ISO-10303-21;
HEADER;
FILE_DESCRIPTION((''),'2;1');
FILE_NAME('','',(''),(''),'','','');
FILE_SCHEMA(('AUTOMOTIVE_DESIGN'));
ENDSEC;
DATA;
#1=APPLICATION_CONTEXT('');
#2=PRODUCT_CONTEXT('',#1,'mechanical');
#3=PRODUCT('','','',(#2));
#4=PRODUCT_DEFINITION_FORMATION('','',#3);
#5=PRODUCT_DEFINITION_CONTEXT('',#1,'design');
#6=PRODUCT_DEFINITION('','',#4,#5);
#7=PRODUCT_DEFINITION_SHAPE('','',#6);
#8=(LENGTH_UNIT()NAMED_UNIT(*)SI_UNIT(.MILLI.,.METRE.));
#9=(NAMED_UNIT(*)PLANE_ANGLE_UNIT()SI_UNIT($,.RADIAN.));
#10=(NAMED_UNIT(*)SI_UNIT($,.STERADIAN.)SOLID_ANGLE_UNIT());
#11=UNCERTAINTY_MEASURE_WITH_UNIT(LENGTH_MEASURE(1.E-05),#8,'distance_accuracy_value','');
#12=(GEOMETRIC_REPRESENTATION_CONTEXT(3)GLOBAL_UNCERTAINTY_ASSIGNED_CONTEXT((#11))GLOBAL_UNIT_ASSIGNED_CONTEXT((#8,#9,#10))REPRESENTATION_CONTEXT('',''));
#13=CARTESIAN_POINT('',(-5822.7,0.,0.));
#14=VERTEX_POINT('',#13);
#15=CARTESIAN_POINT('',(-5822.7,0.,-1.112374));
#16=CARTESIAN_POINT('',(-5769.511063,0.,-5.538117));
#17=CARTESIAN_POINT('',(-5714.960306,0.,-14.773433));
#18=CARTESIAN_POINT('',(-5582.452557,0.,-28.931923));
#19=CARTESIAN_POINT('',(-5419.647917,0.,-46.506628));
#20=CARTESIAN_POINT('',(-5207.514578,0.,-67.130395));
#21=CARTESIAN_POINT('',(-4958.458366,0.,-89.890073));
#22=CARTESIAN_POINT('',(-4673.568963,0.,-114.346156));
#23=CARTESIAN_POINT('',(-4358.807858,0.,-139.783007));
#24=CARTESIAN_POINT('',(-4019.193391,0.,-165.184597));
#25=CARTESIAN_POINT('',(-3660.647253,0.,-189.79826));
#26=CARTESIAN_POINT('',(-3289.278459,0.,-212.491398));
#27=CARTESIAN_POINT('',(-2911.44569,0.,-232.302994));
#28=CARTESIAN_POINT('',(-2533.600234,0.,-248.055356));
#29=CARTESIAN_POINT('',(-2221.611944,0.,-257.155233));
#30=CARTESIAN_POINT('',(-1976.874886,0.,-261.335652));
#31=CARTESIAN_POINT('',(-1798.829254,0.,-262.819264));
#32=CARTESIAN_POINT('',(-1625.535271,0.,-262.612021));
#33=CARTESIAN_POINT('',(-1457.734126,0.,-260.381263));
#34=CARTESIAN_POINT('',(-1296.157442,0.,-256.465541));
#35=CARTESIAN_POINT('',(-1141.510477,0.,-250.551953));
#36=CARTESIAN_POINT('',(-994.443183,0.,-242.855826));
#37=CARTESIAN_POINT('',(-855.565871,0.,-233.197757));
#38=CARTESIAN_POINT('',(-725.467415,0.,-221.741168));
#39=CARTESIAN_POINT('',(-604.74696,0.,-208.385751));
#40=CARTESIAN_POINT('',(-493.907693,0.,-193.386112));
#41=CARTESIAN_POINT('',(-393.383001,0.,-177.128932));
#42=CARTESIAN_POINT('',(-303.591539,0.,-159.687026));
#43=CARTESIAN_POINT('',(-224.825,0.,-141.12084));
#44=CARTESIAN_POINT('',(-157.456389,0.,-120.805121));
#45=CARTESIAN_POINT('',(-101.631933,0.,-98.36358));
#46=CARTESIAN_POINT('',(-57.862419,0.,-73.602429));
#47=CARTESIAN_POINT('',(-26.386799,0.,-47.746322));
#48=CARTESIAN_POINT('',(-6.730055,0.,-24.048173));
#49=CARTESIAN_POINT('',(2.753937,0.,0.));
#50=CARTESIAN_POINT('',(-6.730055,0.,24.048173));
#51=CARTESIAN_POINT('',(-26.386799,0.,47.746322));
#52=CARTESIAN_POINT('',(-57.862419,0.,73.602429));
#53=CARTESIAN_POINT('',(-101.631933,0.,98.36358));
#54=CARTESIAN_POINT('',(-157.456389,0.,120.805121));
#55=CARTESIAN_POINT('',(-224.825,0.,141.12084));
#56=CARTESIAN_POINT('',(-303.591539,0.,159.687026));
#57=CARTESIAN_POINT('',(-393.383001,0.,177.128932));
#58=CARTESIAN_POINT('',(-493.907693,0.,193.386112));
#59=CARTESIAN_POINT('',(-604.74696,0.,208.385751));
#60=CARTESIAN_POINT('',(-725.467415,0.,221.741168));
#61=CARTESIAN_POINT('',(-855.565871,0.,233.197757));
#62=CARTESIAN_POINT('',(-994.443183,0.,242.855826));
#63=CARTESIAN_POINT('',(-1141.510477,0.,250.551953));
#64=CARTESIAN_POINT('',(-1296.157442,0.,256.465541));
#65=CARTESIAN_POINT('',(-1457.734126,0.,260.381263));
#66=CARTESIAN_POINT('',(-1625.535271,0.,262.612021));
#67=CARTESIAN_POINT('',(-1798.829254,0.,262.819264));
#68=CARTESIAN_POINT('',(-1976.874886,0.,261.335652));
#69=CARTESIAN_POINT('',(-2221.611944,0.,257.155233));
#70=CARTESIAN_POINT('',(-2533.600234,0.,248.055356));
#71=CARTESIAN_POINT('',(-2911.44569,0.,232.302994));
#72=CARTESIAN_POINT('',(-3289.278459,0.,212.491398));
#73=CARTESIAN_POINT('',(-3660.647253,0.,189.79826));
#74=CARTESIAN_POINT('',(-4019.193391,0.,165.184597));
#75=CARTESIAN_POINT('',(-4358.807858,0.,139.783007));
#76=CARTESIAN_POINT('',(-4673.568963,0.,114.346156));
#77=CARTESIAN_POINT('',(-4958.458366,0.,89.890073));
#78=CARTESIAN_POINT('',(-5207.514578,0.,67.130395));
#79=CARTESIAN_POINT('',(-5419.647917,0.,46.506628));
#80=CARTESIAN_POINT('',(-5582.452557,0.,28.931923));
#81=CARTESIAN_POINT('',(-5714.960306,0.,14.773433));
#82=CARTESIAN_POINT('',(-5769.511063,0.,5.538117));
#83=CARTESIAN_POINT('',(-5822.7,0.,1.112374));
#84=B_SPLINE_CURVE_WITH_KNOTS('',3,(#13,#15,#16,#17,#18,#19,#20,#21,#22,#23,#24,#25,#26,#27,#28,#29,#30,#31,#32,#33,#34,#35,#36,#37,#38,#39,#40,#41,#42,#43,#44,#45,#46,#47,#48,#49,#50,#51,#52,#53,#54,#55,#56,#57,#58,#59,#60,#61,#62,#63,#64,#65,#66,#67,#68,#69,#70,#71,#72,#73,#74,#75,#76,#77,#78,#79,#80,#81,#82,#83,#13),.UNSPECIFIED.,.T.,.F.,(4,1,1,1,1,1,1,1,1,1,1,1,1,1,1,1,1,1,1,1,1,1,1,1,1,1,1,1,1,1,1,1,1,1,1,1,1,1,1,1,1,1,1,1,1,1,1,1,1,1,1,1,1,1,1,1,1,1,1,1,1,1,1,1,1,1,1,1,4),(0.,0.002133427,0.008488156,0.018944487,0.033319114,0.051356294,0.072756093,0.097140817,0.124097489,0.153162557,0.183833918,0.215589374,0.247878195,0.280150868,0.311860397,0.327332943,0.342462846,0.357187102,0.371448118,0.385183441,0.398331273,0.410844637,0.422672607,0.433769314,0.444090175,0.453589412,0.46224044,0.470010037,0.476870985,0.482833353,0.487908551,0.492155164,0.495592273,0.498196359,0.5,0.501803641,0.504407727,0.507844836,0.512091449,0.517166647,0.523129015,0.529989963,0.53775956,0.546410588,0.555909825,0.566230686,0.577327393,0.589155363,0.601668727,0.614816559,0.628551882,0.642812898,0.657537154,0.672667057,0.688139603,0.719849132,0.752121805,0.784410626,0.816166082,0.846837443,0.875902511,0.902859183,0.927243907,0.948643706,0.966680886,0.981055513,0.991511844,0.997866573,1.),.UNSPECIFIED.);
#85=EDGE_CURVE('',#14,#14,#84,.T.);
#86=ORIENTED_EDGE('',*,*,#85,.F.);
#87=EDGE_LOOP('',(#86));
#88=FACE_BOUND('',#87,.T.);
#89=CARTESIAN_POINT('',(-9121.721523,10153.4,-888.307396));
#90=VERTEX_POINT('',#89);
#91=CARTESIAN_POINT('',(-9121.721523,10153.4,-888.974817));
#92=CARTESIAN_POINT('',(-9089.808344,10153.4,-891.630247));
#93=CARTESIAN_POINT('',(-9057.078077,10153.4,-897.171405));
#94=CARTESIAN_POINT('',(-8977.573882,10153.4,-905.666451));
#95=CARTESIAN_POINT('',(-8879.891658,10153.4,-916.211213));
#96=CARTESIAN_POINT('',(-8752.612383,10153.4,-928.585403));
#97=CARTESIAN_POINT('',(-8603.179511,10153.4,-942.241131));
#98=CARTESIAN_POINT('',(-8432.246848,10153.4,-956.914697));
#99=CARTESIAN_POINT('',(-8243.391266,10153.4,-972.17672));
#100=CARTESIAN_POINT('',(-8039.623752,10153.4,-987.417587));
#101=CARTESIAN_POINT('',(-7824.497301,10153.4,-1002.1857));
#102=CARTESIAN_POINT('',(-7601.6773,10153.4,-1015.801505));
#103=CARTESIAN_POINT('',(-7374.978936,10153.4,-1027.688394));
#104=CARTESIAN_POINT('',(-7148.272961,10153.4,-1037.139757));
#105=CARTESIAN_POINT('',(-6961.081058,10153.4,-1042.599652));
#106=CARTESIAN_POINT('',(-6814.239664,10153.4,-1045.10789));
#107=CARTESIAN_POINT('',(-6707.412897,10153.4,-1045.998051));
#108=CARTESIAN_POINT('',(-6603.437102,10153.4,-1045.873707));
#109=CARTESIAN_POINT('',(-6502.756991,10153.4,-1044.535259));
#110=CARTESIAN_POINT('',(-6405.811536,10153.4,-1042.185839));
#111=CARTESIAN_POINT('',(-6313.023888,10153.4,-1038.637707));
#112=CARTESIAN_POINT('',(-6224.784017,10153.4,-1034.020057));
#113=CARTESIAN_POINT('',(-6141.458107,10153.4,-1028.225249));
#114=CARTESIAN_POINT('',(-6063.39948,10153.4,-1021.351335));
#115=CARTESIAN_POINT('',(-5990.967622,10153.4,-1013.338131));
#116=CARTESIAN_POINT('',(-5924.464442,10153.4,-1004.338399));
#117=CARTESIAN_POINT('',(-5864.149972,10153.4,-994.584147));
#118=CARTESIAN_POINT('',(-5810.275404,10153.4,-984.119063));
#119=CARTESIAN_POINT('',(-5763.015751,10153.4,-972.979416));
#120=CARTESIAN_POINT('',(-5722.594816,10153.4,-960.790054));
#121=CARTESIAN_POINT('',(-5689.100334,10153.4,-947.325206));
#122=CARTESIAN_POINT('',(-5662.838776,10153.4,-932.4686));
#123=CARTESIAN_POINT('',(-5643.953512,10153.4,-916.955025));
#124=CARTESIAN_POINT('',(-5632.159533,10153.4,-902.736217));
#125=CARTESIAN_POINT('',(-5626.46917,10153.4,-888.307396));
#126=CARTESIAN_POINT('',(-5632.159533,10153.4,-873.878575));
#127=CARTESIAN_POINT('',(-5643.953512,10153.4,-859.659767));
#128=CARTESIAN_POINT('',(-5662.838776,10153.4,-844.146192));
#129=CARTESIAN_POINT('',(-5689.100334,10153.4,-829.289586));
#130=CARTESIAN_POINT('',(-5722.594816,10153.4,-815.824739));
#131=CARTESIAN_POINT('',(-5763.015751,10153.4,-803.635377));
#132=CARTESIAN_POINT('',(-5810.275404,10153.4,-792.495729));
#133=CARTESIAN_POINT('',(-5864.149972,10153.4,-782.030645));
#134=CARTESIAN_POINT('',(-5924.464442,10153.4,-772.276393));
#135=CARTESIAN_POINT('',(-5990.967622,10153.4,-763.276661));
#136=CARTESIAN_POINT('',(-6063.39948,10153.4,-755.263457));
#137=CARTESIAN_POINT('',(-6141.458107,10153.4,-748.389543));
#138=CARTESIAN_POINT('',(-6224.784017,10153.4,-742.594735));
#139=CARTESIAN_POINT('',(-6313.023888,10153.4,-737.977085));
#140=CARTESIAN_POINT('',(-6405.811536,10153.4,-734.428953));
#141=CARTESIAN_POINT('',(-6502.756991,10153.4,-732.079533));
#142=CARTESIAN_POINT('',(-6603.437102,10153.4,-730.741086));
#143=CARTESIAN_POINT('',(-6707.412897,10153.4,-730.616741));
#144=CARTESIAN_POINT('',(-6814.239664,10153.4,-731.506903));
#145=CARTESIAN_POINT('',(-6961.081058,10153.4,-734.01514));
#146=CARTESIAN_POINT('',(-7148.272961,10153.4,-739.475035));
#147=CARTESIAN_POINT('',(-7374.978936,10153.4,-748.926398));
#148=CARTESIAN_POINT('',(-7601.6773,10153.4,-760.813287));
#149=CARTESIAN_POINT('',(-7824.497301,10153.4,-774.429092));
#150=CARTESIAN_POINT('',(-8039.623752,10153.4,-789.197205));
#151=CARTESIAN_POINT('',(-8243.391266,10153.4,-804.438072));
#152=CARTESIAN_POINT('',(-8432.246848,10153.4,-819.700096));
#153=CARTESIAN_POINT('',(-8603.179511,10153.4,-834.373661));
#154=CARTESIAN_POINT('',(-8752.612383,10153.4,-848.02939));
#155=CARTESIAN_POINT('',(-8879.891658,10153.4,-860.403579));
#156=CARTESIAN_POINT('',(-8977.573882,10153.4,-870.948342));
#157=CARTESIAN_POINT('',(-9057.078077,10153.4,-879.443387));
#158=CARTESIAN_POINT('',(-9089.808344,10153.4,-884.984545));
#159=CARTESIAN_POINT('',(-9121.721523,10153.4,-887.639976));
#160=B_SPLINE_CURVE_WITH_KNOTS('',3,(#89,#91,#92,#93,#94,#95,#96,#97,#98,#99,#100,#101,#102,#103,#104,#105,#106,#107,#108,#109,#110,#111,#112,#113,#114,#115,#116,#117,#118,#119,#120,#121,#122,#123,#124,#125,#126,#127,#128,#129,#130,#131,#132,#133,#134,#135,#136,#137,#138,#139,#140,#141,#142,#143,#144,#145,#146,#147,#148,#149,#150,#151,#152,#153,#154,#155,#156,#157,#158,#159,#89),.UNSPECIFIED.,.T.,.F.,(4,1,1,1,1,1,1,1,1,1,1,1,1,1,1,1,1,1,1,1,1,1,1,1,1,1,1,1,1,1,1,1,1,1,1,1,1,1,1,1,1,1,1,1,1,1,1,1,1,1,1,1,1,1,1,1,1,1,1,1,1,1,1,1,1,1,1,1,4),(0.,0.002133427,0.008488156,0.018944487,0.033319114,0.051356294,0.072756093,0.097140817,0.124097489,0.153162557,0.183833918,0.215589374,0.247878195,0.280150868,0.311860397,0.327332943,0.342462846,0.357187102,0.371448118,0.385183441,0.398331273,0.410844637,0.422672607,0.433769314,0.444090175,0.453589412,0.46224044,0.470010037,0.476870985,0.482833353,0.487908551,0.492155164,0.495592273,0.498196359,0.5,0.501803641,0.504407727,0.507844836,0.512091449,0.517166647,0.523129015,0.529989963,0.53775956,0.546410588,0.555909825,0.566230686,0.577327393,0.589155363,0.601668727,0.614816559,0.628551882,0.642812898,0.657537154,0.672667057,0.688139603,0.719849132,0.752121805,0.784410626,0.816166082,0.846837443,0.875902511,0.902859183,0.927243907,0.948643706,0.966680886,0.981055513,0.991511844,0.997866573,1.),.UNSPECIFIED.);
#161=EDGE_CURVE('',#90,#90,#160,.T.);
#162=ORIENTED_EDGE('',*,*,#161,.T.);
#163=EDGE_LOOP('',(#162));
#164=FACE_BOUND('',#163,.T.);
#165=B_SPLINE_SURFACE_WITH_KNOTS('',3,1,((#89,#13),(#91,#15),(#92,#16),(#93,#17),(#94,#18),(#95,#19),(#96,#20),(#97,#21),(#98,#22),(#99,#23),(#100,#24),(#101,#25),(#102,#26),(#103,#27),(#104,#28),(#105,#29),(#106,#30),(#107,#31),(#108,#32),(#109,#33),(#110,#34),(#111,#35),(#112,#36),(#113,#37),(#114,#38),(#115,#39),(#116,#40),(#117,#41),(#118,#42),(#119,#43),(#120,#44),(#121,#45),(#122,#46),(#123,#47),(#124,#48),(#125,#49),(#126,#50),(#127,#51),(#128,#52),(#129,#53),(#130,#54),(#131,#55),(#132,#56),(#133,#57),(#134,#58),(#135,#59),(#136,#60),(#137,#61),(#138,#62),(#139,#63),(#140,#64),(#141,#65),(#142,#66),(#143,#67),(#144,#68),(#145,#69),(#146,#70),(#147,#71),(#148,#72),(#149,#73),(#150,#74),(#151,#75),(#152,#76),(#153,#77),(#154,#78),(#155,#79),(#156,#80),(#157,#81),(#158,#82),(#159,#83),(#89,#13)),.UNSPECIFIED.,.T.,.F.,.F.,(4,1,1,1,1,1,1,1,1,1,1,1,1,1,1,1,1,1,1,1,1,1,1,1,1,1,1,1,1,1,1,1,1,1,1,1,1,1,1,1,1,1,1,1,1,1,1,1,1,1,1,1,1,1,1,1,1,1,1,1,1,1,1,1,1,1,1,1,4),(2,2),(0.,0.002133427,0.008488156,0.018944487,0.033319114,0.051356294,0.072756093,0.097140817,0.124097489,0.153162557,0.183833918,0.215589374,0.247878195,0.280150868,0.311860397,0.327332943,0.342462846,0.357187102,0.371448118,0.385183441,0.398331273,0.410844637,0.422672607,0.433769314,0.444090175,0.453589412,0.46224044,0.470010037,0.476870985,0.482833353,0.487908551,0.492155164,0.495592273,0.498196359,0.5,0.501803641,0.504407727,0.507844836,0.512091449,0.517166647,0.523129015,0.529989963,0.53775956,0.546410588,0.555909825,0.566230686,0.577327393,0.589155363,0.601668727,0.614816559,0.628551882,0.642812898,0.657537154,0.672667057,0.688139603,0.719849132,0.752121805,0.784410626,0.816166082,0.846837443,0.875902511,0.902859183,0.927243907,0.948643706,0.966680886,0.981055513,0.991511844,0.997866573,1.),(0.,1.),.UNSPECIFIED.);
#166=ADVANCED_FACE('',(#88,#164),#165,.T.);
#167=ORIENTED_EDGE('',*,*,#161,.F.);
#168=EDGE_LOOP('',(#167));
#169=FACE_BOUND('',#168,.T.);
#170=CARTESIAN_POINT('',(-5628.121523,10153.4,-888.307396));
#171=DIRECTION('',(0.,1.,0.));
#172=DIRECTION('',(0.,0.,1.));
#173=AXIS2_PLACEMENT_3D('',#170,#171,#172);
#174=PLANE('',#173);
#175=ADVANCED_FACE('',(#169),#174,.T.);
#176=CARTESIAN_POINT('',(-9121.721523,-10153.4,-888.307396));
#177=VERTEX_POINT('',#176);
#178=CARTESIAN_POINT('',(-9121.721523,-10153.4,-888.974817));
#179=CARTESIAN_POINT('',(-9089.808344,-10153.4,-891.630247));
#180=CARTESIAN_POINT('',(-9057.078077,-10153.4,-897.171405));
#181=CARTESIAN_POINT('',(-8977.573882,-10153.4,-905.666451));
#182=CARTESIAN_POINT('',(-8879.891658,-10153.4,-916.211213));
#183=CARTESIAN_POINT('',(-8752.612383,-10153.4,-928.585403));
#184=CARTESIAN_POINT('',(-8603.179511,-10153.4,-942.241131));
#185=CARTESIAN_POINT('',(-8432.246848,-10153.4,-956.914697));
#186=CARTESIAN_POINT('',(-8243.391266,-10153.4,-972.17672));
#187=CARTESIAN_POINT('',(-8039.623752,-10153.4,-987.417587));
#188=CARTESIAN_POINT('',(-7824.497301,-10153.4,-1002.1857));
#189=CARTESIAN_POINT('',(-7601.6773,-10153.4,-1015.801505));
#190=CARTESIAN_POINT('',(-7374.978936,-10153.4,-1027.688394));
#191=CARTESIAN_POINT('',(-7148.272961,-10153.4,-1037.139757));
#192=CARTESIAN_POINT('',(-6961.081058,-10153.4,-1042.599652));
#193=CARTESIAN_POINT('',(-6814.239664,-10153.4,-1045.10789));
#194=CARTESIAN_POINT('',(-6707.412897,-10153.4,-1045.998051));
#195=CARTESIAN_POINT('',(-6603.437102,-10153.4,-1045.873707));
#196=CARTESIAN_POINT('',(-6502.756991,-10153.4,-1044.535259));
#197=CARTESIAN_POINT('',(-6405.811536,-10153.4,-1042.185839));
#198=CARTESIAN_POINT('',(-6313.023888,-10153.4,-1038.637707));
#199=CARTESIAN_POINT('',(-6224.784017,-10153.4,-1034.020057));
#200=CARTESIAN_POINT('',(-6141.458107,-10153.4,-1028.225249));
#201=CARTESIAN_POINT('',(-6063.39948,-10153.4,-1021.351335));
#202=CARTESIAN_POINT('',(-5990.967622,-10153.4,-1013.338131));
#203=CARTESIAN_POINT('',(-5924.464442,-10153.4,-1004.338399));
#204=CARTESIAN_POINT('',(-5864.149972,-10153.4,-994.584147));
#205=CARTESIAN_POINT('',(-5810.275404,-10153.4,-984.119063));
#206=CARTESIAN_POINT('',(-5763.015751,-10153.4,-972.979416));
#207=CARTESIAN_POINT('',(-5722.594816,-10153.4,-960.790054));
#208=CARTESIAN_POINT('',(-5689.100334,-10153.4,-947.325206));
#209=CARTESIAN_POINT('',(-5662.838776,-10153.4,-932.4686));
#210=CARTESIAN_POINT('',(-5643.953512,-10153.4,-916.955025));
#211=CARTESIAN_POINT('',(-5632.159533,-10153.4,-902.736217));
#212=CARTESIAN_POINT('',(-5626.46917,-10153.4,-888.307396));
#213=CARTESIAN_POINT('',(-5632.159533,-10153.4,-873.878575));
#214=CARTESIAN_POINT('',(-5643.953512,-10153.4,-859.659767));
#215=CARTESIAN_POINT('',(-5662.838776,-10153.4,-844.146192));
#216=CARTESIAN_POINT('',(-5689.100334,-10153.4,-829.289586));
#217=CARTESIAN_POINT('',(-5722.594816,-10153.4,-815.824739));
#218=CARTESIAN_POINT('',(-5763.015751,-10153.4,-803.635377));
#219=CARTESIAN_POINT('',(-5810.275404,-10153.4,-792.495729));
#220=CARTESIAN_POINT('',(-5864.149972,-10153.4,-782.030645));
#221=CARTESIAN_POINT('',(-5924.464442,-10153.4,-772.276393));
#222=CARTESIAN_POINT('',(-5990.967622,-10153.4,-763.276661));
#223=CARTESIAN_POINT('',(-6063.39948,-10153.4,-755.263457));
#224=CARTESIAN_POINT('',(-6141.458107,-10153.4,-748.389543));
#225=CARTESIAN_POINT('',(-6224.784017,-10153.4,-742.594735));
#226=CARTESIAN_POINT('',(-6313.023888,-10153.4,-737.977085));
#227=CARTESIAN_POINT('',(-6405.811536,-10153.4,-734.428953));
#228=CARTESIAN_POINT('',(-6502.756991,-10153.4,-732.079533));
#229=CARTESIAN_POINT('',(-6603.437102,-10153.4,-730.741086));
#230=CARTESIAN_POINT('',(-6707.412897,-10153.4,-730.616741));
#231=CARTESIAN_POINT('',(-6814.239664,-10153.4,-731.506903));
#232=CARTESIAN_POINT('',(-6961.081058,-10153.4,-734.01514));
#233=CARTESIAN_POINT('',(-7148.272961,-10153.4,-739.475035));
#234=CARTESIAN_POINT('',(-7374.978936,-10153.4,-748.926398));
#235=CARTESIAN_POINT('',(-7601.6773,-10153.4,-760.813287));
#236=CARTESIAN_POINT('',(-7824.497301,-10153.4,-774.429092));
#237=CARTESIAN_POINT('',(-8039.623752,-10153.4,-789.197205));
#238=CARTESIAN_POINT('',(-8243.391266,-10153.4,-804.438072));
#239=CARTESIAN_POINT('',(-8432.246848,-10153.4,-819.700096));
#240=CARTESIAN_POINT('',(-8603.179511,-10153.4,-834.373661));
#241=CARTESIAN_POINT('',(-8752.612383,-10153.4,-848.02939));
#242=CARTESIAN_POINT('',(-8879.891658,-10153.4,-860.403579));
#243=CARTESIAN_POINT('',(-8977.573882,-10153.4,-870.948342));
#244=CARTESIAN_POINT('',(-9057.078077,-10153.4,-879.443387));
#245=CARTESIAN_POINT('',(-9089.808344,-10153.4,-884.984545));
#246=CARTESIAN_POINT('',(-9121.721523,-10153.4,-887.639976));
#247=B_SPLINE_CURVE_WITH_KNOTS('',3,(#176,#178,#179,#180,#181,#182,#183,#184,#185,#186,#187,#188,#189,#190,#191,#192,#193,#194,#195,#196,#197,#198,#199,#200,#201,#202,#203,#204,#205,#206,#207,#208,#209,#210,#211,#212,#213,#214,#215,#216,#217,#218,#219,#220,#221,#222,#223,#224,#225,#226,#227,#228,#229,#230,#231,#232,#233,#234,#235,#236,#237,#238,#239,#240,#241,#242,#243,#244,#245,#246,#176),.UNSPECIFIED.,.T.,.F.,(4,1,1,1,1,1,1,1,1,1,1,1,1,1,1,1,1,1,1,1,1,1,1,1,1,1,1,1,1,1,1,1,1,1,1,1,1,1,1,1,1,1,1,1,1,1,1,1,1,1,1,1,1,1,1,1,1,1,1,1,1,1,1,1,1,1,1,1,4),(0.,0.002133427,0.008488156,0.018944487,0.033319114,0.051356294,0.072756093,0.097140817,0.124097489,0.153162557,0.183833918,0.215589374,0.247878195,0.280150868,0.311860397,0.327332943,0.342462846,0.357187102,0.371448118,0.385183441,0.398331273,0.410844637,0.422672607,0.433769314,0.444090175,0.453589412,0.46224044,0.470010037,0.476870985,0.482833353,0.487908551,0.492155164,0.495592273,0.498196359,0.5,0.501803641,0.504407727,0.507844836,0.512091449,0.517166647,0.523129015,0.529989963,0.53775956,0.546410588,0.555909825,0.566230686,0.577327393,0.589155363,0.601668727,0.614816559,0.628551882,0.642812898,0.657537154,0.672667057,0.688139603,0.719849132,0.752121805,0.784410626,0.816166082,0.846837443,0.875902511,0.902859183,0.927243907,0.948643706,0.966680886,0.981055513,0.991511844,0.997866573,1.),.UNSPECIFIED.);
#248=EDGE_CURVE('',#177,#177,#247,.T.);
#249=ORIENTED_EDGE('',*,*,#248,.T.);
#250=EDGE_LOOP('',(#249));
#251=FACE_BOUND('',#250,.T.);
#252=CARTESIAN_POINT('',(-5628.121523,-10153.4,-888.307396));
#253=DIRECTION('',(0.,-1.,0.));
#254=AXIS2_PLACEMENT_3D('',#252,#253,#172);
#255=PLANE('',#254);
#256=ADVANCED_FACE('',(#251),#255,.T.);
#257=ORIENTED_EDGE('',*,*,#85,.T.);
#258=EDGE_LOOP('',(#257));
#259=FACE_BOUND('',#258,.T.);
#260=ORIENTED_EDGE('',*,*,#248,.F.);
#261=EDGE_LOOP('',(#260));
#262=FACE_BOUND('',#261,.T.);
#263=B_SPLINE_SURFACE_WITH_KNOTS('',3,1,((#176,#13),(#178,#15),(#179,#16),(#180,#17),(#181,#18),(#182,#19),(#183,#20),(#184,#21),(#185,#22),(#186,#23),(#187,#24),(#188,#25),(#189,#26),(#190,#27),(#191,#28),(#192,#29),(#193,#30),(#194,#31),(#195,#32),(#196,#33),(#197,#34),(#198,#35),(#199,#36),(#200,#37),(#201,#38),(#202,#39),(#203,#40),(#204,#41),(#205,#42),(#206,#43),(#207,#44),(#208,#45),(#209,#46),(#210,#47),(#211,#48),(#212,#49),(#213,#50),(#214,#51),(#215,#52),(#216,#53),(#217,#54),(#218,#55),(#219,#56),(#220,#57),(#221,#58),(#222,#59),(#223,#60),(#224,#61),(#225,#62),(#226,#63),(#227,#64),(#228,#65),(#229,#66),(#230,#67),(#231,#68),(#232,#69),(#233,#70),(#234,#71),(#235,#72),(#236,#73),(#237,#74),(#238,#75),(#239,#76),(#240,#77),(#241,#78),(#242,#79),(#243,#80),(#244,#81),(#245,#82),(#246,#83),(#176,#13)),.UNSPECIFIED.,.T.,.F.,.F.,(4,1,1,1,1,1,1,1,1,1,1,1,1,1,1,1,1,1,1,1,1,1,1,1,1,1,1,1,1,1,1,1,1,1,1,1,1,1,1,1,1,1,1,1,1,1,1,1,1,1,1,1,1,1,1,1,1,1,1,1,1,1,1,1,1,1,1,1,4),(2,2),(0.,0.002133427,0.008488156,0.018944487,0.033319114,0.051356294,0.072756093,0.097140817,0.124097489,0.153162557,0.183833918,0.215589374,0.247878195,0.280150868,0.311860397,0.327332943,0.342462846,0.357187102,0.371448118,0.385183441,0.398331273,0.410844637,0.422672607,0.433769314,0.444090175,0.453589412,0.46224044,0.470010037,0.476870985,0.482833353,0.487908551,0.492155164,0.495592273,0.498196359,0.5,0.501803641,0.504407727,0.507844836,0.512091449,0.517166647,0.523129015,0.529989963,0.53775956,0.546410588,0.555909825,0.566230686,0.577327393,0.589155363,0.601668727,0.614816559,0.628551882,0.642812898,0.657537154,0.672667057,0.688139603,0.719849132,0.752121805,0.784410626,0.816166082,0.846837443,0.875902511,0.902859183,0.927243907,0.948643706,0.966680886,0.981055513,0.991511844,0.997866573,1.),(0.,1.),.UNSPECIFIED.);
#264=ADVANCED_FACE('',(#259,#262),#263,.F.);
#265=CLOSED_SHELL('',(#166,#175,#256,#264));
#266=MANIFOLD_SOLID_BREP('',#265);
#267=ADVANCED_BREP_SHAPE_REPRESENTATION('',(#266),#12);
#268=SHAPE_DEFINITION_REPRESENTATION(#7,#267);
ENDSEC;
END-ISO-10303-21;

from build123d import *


with BuildPart() as part:
    # Loft1: read off the stored shape, not the designer's step
    # Loft1: loft between two sections, ruled curve by curve
    loft1_from = [
        Edge.make_bspline([(-9121.721523, 10153.4, -888.3073962), (-9121.721523, 10153.4, -888.97481667), (-9089.808343706, 10153.4, -891.630247371), (-9057.07807669, 10153.4, -897.171405393), (-8977.573882293, 10153.4, -905.666450739), (-8879.891657699, 10153.4, -916.211213285), (-8752.61238274, 10153.4, -928.585402678), (-8603.179510828, 10153.4, -942.241130984), (-8432.246847932, 10153.4, -956.914696759), (-8243.391266019, 10153.4, -972.176720475), (-8039.623752093, 10153.4, -987.41758735), (-7824.497301325, 10153.4, -1002.185700126), (-7601.67730037, 10153.4, -1015.801504829), (-7374.97893646, 10153.4, -1027.688394313), (-7148.272960999, 10153.4, -1037.139757469), (-6961.081058327, 10153.4, -1042.599652216), (-6814.239664316, 10153.4, -1045.107889524), (-6707.412896579, 10153.4, -1045.99805137), (-6603.437102019, 10153.4, -1045.873706629), (-6502.756991249, 10153.4, -1044.535259245), (-6405.811536, 10153.4, -1042.185839499), (-6313.023888406, 10153.4, -1038.637706974), (-6224.784017274, 10153.4, -1034.020057375), (-6141.458107161, 10153.4, -1028.225249142), (-6063.399479883, 10153.4, -1021.351335422), (-5990.967621691, 10153.4, -1013.338130748), (-5924.464442276, 10153.4, -1004.338399103), (-5864.149972089, 10153.4, -994.584147276), (-5810.27540371, 10153.4, -984.119063415), (-5763.015750745, 10153.4, -972.979415582), (-5722.594815838, 10153.4, -960.790053577), (-5689.10033376, 10153.4, -947.325206498), (-5662.838775739, 10153.4, -932.4686005), (-5643.953511739, 10153.4, -916.955025127), (-5632.159532765, 10153.4, -902.7362173), (-5626.469170056, 10153.4, -888.3073962), (-5632.159532765, 10153.4, -873.8785751), (-5643.953511739, 10153.4, -859.659767273), (-5662.838775739, 10153.4, -844.1461919), (-5689.10033376, 10153.4, -829.289585902), (-5722.594815838, 10153.4, -815.824738823), (-5763.015750745, 10153.4, -803.635376821), (-5810.275403708, 10153.4, -792.49572897), (-5864.149972109, 10153.4, -782.030645185), (-5924.464442253, 10153.4, -772.276393018), (-5990.967621694, 10153.4, -763.276661476), (-6063.399479882, 10153.4, -755.263456771), (-6141.458107161, 10153.4, -748.38954306), (-6224.784017274, 10153.4, -742.594734825), (-6313.023888406, 10153.4, -737.977085226), (-6405.811536, 10153.4, -734.428952701), (-6502.756991249, 10153.4, -732.079532955), (-6603.437102019, 10153.4, -730.741085571), (-6707.412896579, 10153.4, -730.61674083), (-6814.239664316, 10153.4, -731.506902676), (-6961.081058327, 10153.4, -734.015139984), (-7148.272960999, 10153.4, -739.475034732), (-7374.97893646, 10153.4, -748.926397881), (-7601.677300369, 10153.4, -760.813287392), (-7824.497301335, 10153.4, -774.429091998), (-8039.623752083, 10153.4, -789.197205118), (-8243.39126602, 10153.4, -804.438071909), (-8432.246847932, 10153.4, -819.700095645), (-8603.179510828, 10153.4, -834.373661415), (-8752.61238274, 10153.4, -848.029389722), (-8879.8916577, 10153.4, -860.403579115), (-8977.573882293, 10153.4, -870.948341661), (-9057.07807669, 10153.4, -879.443387007), (-9089.808343706, 10153.4, -884.984545029), (-9121.721523, 10153.4, -887.63997573), (-9121.721523, 10153.4, -888.3073962)], [0, 0, 0, 0, 0.002133427, 0.008488156, 0.018944487, 0.033319114, 0.051356294, 0.072756093, 0.097140817, 0.124097489, 0.153162557, 0.183833918, 0.215589374, 0.247878195, 0.280150868, 0.311860397, 0.327332943, 0.342462846, 0.357187102, 0.371448118, 0.385183441, 0.398331273, 0.410844637, 0.422672607, 0.433769314, 0.444090175, 0.453589412, 0.46224044, 0.470010037, 0.476870985, 0.482833353, 0.487908551, 0.492155164, 0.495592273, 0.498196359, 0.5, 0.501803641, 0.504407727, 0.507844836, 0.512091449, 0.517166647, 0.523129015, 0.529989963, 0.53775956, 0.546410588, 0.555909825, 0.566230686, 0.577327393, 0.589155363, 0.601668727, 0.614816559, 0.628551882, 0.642812898, 0.657537154, 0.672667057, 0.688139603, 0.719849132, 0.752121805, 0.784410626, 0.816166082, 0.846837443, 0.875902511, 0.902859183, 0.927243907, 0.948643706, 0.966680886, 0.981055513, 0.991511844, 0.997866573, 1, 1, 1, 1], 3),
    ]
    loft1_to = [
        Edge.make_bspline([(-5822.7, 0, 0), (-5822.7, 0, -1.112373818), (-5769.511063352, 0, -5.538116989), (-5714.960306037, 0, -14.773433229), (-5582.452556805, 0, -28.931923192), (-5419.647917138, 0, -46.506628046), (-5207.514577802, 0, -67.130395099), (-4958.458365504, 0, -89.890072571), (-4673.568963099, 0, -114.346155525), (-4358.807857992, 0, -139.783007371), (-4019.193390567, 0, -165.184597439), (-3660.647253409, 0, -189.798260212), (-3289.27845915, 0, -212.491397801), (-2911.445689648, 0, -232.302993735), (-2533.600234153, 0, -248.055355828), (-2221.611943654, 0, -257.155232502), (-1976.874885917, 0, -261.335651947), (-1798.829253761, 0, -262.819263517), (-1625.535270768, 0, -262.612021096), (-1457.734125537, 0, -260.381262686), (-1296.157441806, 0, -256.465540692), (-1141.510477173, 0, -250.55195263), (-994.443183366, 0, -242.855825907), (-855.565871478, 0, -233.197756893), (-725.467414568, 0, -221.741168455), (-604.746959832, 0, -208.385750823), (-493.907692905, 0, -193.386112384), (-393.383000524, 0, -177.128932372), (-303.591539157, 0, -159.687026213), (-224.824999969, 0, -141.120840175), (-157.456389456, 0, -120.805120538), (-101.631933081, 0, -98.363580267), (-57.862419144, 0, -73.60242852), (-26.386798956, 0, -47.746321546), (-6.730054803, 0, -24.048172835), (2.753937339, 0, 0), (-6.730054803, 0, 24.048172835), (-26.386798956, 0, 47.746321546), (-57.862419144, 0, 73.60242852), (-101.631933081, 0, 98.363580267), (-157.456389456, 0, 120.805120538), (-224.824999969, 0, 141.120840175), (-303.591539157, 0, 159.687026213), (-393.383000524, 0, 177.128932372), (-493.907692905, 0, 193.386112384), (-604.746959832, 0, 208.385750823), (-725.467414568, 0, 221.741168455), (-855.565871478, 0, 233.197756893), (-994.443183366, 0, 242.855825907), (-1141.510477173, 0, 250.55195263), (-1296.157441806, 0, 256.465540692), (-1457.734125537, 0, 260.381262686), (-1625.535270768, 0, 262.612021096), (-1798.829253761, 0, 262.819263517), (-1976.874885917, 0, 261.335651947), (-2221.611943654, 0, 257.155232502), (-2533.600234153, 0, 248.055355828), (-2911.445689648, 0, 232.302993735), (-3289.27845915, 0, 212.491397801), (-3660.647253409, 0, 189.798260212), (-4019.193390567, 0, 165.184597439), (-4358.807857992, 0, 139.783007371), (-4673.568963099, 0, 114.346155525), (-4958.458365504, 0, 89.890072571), (-5207.514577802, 0, 67.130395099), (-5419.647917138, 0, 46.506628046), (-5582.452556805, 0, 28.931923192), (-5714.960306037, 0, 14.773433229), (-5769.511063352, 0, 5.538116989), (-5822.7, 0, 1.112373818), (-5822.7, 0, 0)], [0, 0, 0, 0, 0.002133427, 0.008488156, 0.018944487, 0.033319114, 0.051356294, 0.072756093, 0.097140817, 0.124097489, 0.153162557, 0.183833918, 0.215589374, 0.247878195, 0.280150868, 0.311860397, 0.327332943, 0.342462846, 0.357187102, 0.371448118, 0.385183441, 0.398331273, 0.410844637, 0.422672607, 0.433769314, 0.444090175, 0.453589412, 0.46224044, 0.470010037, 0.476870985, 0.482833353, 0.487908551, 0.492155164, 0.495592273, 0.498196359, 0.5, 0.501803641, 0.504407727, 0.507844836, 0.512091449, 0.517166647, 0.523129015, 0.529989963, 0.53775956, 0.546410588, 0.555909825, 0.566230686, 0.577327393, 0.589155363, 0.601668727, 0.614816559, 0.628551882, 0.642812898, 0.657537154, 0.672667057, 0.688139603, 0.719849132, 0.752121805, 0.784410626, 0.816166082, 0.846837443, 0.875902511, 0.902859183, 0.927243907, 0.948643706, 0.966680886, 0.981055513, 0.991511844, 0.997866573, 1, 1, 1, 1], 3),
    ]
    loft1 = Solid(Shell([*[Face.make_surface_from_curves(loft1_from[k], loft1_to[k]) for k in range(1)], Face(Wire(loft1_from)), Face(Wire(loft1_to))]))
    add(loft1)

    # Specchia1: Loft1 across plane
    add(loft1.mirror(Plane.ZX))


solid = part.part
